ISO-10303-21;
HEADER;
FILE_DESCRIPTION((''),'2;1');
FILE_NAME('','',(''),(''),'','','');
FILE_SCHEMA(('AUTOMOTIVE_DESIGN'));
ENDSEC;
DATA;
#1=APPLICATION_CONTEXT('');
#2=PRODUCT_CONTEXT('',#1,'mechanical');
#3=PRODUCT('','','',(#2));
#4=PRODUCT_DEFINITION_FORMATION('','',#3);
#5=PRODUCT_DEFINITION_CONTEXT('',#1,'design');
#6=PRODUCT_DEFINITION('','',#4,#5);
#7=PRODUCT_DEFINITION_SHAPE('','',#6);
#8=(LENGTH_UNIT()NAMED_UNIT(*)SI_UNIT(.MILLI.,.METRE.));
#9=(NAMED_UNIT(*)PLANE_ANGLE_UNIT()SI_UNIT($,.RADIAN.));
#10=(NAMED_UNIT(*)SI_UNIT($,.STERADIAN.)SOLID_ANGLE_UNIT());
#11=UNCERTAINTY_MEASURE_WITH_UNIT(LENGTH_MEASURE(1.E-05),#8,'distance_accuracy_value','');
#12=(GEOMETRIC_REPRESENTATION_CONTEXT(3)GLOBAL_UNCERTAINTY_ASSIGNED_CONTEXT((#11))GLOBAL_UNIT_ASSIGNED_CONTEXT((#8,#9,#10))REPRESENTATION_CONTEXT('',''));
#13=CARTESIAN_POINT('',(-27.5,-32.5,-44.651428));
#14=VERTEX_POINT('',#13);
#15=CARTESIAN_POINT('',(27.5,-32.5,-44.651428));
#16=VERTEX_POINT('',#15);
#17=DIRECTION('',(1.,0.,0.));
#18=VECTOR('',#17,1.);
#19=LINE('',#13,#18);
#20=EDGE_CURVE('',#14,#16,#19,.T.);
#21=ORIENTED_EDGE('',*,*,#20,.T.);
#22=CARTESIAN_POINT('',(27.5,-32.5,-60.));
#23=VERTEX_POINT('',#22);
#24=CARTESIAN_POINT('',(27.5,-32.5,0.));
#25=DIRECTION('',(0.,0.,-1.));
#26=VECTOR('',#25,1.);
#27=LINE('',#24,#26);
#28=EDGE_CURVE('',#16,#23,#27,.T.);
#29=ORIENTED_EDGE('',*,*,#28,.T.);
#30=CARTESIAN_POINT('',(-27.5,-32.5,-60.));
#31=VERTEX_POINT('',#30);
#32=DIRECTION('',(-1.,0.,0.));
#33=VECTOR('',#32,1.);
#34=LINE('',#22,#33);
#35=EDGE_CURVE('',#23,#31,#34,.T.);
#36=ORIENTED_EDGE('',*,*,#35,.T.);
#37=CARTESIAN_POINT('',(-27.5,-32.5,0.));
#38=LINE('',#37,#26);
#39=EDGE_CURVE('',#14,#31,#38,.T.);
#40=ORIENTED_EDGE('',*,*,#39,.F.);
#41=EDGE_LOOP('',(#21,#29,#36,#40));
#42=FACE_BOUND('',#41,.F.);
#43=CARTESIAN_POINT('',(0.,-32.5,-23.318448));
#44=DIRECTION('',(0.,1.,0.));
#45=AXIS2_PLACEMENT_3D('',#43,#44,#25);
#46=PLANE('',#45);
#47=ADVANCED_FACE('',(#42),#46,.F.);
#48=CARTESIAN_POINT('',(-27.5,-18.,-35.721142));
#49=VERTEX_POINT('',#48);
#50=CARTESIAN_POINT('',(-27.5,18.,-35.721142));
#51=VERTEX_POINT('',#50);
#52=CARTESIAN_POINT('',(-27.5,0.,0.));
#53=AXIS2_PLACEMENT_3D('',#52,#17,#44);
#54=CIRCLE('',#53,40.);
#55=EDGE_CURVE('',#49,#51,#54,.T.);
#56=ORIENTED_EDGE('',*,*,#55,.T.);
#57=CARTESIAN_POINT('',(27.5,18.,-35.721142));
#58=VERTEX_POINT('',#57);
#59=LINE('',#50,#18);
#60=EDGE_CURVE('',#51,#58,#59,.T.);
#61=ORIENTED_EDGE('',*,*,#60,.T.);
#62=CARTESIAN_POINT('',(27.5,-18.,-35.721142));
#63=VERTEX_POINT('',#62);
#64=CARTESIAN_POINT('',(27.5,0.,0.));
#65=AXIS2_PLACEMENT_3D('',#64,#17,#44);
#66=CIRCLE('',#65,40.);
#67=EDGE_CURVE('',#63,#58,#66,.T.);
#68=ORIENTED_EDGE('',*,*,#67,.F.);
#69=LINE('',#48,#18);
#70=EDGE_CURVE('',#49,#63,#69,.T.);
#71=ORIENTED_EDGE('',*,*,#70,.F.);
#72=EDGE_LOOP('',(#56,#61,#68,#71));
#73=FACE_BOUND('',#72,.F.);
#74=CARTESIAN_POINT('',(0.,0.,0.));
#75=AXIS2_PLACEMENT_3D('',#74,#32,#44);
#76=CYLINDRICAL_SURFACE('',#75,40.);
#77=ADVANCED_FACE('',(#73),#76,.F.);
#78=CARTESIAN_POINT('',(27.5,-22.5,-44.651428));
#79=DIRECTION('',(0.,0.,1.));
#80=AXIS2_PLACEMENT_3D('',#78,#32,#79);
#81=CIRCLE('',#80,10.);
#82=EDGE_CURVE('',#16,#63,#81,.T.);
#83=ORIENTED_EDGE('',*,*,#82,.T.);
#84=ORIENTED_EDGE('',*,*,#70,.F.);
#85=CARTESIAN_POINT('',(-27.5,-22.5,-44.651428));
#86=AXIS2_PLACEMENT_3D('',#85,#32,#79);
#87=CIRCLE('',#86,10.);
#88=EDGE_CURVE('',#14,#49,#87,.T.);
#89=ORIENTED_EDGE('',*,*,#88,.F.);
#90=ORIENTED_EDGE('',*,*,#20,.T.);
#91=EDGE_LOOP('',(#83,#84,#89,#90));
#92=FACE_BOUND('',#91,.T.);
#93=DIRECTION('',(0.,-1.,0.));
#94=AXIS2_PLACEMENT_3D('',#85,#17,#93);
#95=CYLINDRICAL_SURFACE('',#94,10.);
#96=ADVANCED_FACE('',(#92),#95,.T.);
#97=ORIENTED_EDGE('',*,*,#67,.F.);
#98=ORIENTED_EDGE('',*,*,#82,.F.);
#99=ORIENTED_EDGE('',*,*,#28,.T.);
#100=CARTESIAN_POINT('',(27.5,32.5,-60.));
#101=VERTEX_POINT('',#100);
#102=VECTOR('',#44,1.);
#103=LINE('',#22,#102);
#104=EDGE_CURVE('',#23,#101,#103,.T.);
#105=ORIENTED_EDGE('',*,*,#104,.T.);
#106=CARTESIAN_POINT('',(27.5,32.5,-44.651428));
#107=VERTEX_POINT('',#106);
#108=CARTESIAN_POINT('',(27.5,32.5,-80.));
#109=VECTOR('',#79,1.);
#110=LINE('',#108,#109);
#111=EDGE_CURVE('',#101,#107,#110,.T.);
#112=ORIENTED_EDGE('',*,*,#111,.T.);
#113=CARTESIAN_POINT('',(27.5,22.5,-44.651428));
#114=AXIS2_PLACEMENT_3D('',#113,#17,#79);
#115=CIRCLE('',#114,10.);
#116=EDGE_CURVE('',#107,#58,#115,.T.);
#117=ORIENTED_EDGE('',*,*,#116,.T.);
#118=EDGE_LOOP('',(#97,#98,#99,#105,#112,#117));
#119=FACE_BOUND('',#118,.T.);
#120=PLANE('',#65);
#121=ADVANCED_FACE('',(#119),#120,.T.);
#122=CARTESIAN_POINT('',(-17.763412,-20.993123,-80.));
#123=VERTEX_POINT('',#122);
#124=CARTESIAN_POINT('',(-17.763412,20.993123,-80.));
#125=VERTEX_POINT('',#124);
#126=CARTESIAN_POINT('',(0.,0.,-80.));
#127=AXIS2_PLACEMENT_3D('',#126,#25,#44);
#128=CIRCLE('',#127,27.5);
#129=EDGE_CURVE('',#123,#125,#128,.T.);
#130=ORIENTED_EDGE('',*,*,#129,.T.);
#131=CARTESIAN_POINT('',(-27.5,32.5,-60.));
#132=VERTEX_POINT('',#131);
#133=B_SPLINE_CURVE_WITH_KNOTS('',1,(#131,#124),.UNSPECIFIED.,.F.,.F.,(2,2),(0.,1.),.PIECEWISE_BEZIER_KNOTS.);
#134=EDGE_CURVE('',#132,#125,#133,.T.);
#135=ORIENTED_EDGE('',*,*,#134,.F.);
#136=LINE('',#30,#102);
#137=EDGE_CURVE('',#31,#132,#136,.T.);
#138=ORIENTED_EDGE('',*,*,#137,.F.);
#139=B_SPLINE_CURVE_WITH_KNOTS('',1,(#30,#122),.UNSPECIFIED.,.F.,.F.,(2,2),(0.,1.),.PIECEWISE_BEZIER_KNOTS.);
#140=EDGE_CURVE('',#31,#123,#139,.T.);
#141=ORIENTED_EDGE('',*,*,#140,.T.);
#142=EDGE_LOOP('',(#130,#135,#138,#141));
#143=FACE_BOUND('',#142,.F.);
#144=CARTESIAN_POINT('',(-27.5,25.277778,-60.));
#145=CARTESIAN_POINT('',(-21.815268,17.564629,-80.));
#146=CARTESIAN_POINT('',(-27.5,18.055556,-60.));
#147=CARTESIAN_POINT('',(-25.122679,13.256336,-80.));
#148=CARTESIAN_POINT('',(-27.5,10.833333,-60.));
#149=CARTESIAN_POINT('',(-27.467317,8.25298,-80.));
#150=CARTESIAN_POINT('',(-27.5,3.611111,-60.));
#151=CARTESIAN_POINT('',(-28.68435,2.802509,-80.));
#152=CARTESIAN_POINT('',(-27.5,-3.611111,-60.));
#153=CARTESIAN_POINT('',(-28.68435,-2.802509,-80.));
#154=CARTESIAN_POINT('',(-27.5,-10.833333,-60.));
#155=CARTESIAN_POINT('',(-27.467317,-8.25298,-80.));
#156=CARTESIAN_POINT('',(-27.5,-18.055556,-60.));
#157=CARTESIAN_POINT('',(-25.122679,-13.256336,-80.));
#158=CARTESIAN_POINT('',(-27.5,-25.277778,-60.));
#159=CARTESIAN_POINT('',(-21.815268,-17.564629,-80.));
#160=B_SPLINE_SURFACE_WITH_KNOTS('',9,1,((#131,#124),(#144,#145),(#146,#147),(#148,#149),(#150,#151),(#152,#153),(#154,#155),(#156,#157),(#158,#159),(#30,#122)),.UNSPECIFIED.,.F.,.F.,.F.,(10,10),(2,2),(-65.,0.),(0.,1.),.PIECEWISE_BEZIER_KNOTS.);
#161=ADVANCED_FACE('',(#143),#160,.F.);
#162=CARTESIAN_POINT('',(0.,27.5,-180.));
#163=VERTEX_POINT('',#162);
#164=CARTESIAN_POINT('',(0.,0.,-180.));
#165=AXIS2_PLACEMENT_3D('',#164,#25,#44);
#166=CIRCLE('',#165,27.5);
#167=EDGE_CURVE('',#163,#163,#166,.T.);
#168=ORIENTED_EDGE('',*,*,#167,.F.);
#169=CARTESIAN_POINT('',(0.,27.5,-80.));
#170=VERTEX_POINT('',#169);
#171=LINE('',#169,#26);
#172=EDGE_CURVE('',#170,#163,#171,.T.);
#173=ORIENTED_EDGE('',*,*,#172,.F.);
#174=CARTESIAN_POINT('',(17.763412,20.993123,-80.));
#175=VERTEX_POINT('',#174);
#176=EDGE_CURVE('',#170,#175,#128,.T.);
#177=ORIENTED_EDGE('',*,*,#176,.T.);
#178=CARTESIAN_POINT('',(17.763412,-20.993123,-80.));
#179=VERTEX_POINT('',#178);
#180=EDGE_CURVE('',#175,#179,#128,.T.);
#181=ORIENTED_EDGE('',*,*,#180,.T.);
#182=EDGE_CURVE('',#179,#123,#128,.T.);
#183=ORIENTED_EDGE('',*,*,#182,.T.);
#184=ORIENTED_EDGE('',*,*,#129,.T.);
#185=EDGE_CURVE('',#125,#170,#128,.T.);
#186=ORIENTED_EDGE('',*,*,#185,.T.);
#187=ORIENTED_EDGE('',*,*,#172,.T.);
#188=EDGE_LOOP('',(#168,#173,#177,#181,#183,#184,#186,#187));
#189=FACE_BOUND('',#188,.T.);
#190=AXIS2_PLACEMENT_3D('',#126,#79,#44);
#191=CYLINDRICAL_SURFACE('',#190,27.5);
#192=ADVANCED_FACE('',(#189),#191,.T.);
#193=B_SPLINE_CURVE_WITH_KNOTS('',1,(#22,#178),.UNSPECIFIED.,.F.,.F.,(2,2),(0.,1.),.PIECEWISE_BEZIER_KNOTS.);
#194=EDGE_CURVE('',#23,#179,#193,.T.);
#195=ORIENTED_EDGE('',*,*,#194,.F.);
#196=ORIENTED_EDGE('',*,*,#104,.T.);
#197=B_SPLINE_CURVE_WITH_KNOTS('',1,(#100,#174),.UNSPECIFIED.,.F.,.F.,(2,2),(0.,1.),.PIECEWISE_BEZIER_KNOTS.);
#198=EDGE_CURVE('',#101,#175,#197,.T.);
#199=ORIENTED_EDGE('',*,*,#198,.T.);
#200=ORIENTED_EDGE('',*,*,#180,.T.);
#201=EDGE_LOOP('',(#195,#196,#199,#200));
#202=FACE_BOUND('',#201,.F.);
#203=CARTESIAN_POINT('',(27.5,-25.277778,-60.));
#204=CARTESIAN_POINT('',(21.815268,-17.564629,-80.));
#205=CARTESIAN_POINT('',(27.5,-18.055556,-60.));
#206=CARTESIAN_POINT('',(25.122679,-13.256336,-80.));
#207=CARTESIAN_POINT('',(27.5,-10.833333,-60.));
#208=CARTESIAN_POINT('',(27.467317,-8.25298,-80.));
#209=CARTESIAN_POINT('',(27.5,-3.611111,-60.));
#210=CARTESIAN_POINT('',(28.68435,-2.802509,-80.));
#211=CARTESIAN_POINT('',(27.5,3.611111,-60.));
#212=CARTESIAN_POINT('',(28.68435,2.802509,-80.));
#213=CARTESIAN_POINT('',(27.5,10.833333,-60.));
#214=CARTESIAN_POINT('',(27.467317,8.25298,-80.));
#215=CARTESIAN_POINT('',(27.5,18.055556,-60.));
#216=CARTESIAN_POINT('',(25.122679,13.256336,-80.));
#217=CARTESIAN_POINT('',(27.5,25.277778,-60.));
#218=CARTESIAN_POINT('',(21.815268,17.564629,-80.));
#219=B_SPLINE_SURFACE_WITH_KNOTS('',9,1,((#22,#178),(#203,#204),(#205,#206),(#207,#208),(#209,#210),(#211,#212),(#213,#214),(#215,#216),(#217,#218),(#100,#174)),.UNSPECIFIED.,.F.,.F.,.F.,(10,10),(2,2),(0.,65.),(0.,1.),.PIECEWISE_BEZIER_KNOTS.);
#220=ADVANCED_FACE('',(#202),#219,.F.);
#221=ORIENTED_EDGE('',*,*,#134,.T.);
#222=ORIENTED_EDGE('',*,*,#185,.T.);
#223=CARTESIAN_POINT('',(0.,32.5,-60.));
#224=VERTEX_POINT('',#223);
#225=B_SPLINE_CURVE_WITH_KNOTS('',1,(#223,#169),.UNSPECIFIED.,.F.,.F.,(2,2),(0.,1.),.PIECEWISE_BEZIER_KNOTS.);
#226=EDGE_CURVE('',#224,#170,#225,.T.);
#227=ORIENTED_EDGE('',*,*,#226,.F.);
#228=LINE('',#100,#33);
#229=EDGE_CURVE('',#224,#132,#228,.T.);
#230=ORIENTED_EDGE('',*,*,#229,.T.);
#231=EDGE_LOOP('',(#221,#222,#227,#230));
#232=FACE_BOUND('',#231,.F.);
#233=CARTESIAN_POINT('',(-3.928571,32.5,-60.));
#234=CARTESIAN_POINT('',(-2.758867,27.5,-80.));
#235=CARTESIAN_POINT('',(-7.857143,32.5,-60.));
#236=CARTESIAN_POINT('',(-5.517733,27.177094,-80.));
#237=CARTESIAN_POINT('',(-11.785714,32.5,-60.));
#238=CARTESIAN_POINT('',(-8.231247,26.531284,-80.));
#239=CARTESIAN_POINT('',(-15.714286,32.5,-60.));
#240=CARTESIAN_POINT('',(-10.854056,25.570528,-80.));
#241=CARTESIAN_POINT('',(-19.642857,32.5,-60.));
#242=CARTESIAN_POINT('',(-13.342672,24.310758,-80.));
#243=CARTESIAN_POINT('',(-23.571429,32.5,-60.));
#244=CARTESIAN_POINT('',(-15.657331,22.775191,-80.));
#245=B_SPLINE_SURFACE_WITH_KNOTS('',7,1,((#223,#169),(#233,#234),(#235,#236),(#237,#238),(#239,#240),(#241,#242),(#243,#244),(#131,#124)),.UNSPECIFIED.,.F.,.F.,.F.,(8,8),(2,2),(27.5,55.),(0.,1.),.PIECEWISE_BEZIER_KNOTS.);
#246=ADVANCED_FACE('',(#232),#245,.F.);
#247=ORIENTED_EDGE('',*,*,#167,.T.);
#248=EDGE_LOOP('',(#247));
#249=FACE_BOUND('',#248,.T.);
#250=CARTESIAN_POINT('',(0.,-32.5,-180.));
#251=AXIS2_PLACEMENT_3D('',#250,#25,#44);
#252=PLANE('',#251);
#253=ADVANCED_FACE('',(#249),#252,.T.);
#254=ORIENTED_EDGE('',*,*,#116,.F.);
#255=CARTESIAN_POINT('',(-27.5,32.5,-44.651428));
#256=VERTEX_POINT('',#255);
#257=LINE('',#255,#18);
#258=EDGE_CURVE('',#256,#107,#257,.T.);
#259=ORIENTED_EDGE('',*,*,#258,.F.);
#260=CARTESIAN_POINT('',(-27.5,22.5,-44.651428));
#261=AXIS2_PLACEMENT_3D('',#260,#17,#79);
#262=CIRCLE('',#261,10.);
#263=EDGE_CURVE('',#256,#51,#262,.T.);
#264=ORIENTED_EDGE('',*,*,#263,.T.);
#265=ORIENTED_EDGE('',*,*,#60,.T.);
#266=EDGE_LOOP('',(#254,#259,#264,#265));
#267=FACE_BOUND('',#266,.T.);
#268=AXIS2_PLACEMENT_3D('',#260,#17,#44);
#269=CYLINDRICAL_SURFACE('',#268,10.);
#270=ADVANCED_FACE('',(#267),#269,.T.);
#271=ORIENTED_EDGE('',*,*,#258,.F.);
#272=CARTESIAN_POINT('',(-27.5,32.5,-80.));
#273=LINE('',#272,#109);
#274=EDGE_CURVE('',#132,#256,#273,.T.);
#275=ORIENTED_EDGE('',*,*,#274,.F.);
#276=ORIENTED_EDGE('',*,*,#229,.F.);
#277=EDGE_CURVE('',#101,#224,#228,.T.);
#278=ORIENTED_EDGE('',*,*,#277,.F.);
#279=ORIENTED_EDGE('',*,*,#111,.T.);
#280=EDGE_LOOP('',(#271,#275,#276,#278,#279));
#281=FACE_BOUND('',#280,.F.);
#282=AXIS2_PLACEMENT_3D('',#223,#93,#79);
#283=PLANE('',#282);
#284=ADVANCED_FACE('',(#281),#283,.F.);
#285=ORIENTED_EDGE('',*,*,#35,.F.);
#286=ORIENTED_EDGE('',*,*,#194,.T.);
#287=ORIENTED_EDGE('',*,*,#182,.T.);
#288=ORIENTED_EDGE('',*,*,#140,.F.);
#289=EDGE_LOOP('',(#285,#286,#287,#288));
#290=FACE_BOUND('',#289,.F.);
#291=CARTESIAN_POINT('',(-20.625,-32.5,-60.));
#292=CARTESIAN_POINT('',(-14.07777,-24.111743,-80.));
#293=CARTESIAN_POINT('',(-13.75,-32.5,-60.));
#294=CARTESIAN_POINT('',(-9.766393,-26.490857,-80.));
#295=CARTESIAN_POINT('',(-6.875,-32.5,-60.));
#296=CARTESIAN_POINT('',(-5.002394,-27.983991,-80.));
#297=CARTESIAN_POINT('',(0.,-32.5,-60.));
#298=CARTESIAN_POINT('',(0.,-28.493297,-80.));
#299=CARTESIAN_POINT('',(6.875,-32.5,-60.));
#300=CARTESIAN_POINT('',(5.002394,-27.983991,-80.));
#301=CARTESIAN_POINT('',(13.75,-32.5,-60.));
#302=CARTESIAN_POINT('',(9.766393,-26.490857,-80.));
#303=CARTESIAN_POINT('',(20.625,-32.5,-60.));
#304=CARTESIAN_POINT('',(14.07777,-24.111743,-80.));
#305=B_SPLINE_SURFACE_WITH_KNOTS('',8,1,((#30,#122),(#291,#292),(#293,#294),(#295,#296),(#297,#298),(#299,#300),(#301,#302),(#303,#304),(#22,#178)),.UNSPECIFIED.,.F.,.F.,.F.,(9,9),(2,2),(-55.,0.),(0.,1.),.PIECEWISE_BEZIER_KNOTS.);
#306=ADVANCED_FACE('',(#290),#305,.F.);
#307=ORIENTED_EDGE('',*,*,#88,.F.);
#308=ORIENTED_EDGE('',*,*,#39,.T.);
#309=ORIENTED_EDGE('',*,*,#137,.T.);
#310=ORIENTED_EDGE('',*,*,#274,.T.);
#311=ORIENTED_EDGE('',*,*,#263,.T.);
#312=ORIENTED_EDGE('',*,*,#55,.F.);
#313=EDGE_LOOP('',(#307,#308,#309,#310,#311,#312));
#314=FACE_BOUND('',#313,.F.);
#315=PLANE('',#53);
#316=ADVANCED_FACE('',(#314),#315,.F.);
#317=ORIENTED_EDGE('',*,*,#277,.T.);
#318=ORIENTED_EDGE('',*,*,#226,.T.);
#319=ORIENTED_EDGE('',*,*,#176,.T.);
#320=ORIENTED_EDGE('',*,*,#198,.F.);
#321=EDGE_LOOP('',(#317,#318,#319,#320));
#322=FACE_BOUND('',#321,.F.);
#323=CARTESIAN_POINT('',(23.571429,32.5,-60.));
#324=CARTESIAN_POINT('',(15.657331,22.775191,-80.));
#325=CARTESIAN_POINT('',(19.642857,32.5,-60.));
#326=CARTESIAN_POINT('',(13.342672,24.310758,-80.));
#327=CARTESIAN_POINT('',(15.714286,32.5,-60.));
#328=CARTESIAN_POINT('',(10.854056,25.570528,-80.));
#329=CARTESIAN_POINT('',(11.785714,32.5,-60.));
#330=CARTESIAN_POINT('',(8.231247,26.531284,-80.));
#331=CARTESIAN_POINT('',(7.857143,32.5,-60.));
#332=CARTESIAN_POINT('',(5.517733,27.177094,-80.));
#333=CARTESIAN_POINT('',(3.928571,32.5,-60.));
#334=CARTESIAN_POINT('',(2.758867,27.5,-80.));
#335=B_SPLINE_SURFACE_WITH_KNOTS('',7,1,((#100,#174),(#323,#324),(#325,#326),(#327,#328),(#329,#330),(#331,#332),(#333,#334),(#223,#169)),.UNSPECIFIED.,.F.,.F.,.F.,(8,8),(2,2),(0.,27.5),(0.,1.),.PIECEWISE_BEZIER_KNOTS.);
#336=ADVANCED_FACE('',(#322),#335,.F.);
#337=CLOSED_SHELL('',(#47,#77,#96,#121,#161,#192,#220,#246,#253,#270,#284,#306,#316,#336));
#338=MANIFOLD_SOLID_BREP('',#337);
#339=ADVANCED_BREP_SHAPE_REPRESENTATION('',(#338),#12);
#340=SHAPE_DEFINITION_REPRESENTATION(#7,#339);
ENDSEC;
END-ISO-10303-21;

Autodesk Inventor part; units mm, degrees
sketch "Sketch6" plane through (0, 0, 0) normal (1, 0, 0) x (0, 1, 0)
  circle A0 centre (0, 0) radius 32.5
  line L0 (-32.5, 0) -> (-32.5, -80)
  line L1 (-32.5, -80) -> (32.5, -80)
  line L2 (32.5, -80) -> (32.5, 0)
  line L3 (0, 0) -> (0, -80) construction
  line L4 (-32.5, -60) -> (32.5, -60)
  circle A1 centre (0, 0) radius 40
  point P0 (32.5, -23.3184)
  point P1 (23.3184, -32.5)
  point P2 (0, -40)
  point P3 (-32.5, -23.3184)
  dimension "d38" = 65
  dimension "d39" = 80
  dimension "d74" = 80
  dimension "d75" = 20
extrude "Extrusion8" add sketch "Sketch6" along normal mid plane 55 contours L2 L4 L0 A1
ref_plane "Work Plane2" through (0, -32.5, -80) normal (0, 0, -1) x (0, 1, 0)
ref_plane "Work Plane1" through (0, 0, 27.5) normal (0, 0, 1) x (1, 0, 0)
sketch "Sketch3" plane through (0, -32.5, -80) normal (0, 0, -1) x (0, 1, 0)
  circle A0 centre (32.5, 0) radius 27.5
  line L0 (65, -27.5) -> (65, 27.5) projected
  circle A1 centre (32.5, 0) radius 37.5
  dimension "d48" = 10
  dimension "d73" = 55
loft "Loft1" add profiles "Sketch3" section 1 edges at (0, 32.5, -60) (27.5, 0, -60) (0, -32.5, -60) (-27.5, 0, -60) contours A0
sketch "Sketch7" plane through (0, 0, 0) normal (1, 0, 0) x (0, 1, 0)
  line L0 (20.9931, -80) -> (-20.9931, -80) projected
  line L1 (0, -80) -> (0, -200)
  point P0 (0, 0)
  dimension "d52" = 120
ref_plane "Work Plane3" through (0, 0, -200) normal (0, 0, -1) x (-1, 0, 0)
extrude "Extrusion1" add sketch "Sketch3" along normal blind 100 contours A0
sketch "Sketch5" plane through (0, 0, -180) normal (0, 0, -1) x (-1, 0, 0)
  circle A0 centre (0, 0) radius 10
  point P0 (0, 0)
  dimension "d35" = 20
extrude "Extrusion7" [suppressed]
fillet "Fillet6" radius 10 2 edges at (0, -32.5, -23.3184) (0, 32.5, -23.3184)
properties part number "shank_2"
